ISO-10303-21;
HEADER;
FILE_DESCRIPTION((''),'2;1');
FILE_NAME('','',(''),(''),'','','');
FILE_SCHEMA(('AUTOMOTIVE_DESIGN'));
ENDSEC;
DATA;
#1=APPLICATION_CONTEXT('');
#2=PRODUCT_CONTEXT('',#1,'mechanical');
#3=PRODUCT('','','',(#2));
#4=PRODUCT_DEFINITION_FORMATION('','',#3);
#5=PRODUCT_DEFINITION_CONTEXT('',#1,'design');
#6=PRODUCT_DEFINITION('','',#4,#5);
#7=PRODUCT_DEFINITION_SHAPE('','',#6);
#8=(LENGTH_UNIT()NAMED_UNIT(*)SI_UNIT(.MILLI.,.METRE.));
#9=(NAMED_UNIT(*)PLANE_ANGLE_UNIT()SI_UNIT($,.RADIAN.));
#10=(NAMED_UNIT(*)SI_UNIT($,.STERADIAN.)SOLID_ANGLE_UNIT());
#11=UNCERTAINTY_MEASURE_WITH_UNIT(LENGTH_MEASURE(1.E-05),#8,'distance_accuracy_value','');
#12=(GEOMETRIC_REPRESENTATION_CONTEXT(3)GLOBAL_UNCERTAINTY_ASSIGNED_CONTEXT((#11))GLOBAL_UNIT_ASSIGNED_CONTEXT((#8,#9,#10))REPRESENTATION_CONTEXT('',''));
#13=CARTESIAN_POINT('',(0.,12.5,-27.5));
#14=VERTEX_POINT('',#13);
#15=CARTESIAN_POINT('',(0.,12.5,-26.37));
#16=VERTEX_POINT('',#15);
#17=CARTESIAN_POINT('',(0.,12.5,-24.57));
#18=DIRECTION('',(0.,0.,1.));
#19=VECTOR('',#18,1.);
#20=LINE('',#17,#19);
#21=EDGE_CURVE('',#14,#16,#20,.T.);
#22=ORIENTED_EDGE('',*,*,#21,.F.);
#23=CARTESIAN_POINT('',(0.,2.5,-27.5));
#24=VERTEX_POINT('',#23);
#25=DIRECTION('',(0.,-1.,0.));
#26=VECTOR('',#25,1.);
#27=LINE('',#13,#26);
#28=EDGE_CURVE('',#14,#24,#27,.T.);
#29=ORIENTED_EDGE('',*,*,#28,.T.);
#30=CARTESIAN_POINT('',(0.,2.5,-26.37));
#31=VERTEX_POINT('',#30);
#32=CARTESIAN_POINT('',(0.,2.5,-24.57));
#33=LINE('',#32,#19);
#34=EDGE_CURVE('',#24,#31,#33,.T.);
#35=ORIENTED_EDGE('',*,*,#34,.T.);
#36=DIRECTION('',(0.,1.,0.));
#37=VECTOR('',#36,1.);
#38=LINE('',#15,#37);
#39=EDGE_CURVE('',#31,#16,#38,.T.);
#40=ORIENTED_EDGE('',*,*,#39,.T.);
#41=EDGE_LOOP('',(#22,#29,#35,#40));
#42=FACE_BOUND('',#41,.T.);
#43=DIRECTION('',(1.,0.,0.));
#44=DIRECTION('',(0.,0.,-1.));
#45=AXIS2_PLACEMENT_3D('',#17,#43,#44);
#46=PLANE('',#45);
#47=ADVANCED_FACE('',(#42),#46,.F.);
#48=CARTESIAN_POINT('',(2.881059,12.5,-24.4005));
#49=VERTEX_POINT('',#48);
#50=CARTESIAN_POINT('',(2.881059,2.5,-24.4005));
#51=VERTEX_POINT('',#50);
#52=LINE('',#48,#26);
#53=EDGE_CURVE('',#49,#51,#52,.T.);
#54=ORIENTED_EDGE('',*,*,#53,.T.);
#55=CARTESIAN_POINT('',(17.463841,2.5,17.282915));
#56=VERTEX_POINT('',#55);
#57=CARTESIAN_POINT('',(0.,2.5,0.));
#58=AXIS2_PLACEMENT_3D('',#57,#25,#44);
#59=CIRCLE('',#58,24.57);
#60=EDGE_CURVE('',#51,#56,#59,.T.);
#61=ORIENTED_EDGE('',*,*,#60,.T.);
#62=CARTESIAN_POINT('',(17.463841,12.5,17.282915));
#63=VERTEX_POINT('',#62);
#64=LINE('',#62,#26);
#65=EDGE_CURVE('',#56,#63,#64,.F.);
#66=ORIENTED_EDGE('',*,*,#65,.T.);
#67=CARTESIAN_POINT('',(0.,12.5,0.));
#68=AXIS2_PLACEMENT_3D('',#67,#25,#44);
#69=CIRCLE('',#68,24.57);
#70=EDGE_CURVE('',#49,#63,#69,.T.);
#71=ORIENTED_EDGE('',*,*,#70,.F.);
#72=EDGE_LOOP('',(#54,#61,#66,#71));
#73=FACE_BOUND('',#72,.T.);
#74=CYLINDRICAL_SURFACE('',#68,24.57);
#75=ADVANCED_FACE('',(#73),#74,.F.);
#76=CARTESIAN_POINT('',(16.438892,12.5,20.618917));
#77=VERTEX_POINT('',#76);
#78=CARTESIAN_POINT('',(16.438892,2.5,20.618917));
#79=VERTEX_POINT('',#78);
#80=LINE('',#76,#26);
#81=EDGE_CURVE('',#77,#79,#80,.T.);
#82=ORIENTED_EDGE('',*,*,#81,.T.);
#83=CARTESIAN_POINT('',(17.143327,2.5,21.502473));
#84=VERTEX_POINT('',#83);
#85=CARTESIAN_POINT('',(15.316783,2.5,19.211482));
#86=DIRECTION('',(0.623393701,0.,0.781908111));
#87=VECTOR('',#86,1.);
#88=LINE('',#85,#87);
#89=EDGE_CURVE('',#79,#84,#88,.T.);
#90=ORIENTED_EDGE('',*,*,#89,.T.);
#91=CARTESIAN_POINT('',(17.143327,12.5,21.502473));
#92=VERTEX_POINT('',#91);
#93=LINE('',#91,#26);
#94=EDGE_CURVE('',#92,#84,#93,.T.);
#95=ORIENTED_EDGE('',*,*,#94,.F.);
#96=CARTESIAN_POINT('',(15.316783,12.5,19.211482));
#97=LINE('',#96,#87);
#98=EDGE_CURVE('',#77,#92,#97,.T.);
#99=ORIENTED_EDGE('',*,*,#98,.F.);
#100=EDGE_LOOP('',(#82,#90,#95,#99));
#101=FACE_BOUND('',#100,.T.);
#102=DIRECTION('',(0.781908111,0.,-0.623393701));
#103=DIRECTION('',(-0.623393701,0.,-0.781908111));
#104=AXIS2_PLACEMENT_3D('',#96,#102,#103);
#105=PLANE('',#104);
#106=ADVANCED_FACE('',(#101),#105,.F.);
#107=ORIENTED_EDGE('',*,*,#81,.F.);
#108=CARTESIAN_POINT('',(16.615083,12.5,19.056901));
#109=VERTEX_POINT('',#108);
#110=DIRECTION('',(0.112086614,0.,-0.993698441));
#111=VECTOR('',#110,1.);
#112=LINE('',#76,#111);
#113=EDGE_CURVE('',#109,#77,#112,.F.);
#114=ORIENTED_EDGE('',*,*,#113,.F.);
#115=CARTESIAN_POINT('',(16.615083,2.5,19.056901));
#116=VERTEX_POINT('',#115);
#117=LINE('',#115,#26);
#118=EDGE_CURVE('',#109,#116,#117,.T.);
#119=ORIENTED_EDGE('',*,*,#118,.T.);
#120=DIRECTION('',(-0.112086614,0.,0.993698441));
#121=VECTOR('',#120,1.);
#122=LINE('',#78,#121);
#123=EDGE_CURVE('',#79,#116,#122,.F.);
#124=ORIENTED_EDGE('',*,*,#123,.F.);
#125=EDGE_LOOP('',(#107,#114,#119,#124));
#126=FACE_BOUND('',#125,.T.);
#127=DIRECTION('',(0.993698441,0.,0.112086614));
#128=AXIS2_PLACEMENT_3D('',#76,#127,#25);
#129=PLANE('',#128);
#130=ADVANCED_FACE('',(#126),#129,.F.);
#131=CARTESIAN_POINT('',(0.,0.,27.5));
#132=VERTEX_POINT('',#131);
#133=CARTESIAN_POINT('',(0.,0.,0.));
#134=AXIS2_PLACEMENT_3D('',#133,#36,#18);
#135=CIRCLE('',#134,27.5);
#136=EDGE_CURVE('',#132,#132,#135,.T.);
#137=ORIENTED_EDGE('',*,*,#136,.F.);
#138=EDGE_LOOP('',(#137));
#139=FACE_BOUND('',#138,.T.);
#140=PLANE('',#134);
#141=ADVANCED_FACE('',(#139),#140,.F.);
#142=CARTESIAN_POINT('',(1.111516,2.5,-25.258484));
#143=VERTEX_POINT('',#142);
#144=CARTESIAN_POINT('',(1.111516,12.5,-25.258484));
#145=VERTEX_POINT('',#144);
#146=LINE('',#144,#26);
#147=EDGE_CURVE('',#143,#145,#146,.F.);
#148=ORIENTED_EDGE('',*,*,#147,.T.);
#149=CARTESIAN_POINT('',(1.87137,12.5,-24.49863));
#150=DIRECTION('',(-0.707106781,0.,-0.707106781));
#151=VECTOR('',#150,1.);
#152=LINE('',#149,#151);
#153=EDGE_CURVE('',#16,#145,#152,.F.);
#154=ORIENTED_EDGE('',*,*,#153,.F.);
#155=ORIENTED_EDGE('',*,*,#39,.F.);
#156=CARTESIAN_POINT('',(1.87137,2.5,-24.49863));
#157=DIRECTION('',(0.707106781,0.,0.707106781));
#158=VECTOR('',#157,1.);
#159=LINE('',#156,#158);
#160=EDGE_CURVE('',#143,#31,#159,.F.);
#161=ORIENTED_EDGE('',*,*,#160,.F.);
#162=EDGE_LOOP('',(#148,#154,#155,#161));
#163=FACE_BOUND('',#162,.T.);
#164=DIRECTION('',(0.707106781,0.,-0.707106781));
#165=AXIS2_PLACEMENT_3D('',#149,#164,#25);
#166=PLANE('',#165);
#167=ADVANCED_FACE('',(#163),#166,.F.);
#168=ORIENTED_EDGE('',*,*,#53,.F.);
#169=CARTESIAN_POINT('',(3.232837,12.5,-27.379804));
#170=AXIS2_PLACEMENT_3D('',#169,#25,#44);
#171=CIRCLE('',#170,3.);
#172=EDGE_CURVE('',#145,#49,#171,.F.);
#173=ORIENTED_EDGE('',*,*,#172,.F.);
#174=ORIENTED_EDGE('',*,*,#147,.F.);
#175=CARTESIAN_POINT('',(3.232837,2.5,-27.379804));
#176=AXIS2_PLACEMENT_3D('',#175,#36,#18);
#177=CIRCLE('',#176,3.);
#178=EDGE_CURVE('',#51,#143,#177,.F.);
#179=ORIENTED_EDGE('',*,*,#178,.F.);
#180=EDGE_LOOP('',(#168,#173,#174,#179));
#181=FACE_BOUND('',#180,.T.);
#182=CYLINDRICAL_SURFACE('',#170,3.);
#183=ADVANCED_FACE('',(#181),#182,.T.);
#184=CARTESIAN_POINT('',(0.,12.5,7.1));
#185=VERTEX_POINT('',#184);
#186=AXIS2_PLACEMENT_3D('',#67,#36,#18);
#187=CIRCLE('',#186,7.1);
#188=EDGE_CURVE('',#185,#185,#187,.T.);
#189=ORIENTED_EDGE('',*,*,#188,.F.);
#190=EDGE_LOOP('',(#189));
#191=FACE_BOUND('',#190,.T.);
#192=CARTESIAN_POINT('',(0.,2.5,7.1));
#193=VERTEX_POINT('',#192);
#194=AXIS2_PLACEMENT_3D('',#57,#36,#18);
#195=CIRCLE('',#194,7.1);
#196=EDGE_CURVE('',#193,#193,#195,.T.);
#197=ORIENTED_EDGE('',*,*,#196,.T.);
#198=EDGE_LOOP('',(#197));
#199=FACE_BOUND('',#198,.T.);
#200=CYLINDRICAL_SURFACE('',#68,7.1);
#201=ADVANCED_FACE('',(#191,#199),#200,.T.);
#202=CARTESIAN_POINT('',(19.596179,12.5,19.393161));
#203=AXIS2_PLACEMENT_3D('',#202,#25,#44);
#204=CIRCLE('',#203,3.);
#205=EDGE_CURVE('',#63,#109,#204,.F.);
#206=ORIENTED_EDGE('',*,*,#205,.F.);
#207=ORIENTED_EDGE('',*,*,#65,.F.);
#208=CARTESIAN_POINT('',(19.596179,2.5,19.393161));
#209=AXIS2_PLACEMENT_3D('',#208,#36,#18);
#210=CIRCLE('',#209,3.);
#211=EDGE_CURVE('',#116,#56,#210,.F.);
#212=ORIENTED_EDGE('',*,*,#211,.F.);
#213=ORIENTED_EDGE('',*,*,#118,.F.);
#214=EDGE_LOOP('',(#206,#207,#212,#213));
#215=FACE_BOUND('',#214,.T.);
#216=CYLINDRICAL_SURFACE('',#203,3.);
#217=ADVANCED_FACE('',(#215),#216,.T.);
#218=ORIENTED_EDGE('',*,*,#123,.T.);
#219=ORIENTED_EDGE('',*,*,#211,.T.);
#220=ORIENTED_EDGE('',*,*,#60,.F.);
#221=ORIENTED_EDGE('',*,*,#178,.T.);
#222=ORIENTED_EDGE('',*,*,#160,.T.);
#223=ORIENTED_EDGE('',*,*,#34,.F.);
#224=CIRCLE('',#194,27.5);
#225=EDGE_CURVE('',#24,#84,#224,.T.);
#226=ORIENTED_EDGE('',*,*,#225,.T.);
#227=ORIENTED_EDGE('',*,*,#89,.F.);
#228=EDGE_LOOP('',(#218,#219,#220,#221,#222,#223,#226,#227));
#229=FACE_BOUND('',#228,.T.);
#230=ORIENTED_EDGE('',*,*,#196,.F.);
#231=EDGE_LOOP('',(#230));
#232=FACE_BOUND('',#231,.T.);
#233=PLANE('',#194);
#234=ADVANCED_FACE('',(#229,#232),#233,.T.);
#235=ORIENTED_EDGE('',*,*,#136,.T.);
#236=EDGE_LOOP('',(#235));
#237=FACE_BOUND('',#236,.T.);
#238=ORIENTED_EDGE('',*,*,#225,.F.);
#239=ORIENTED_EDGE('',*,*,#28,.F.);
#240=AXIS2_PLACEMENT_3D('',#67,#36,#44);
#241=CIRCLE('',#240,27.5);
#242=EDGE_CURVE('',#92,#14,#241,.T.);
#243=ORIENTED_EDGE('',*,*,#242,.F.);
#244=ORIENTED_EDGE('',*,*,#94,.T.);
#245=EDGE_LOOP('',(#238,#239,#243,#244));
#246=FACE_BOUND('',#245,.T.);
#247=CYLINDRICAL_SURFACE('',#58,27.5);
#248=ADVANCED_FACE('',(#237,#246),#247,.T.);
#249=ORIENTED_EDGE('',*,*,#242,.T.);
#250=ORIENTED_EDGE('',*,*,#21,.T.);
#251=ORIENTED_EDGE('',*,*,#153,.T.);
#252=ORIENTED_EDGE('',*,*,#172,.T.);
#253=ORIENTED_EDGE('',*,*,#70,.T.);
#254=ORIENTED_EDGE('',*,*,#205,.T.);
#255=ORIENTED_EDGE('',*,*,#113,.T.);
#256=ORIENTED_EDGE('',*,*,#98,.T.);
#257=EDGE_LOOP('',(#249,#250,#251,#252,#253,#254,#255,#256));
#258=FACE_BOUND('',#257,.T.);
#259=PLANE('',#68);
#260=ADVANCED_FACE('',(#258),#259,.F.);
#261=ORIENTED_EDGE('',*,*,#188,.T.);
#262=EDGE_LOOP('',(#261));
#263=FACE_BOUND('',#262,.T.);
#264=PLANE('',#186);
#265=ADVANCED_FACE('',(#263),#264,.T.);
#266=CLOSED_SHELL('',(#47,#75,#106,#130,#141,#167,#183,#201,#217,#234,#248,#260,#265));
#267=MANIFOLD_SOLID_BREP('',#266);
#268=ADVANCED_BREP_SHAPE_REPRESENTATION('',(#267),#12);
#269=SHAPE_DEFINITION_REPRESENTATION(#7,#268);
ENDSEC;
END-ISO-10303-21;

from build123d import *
from build123d.topology import SkipClean

# Parameters (mm, degrees)
SKETCH1_R           = 27.5
BOSS_EXTRUDE1_DEPTH = 2.5
SKETCH2_R           = 7.1
BOSS_EXTRUDE2_DEPTH = 10
BOSS_EXTRUDE3_DEPTH = 10
CHAMFER1_SIZE       = 1.8
FILLET2_R           = 3


with BuildPart() as part:
    # Sketch1 → Boss-Extrude1 (new body)
    with BuildSketch(Plane(origin=(0, 0, 0), x_dir=(1, 0, 0), z_dir=(0, 1, 0))):
        with Locations(Location((0, 0, 0), (0, 0, 270))):
            Circle(SKETCH1_R)
    extrude(amount=BOSS_EXTRUDE1_DEPTH)

    # Sketch2 → Boss-Extrude2 (add)
    with BuildSketch(Plane(origin=(0, 2.5, 0), x_dir=(1, 0, 0), z_dir=(0, 1, 0))):
        with Locations(Location((0, 0, 0), (0, 0, 270))):
            Circle(SKETCH2_R)
    extrude(amount=BOSS_EXTRUDE2_DEPTH)

    # Sketch5 → Boss-Extrude3 (add)
    with SkipClean():  # the faces are left unmerged after this step: merging them gives an invalid solid
        with BuildSketch(Plane(origin=(0, 2.5, 0), x_dir=(1, 0, 0), z_dir=(0, 1, 0))):
            with BuildLine():
                Line((0, 24.57), (0, 27.5))
                ThreePointArc((0, 27.5), (25.957349719, 9.081078988), (17.143326771, -21.502473049))
                Line((17.143326771, -21.502473049), (15.316783228, -19.211482284))
                ThreePointArc((15.316783228, -19.211482284), (23.191712094, 8.113531299), (0, 24.57))
            make_face()
        extrude(amount=BOSS_EXTRUDE3_DEPTH)

    # Chamfer1
    # the kernel refuses this chamfer: 1.8 mm, written as the material it takes off along each edge
    with BuildSketch(Plane(origin=(0, 2.5, -24.57), x_dir=(0, 0, -1), z_dir=(0, 1, 0))) as chamfer1_piece_1:
        with BuildLine():
            Line((CHAMFER1_SIZE, 0), (-0.071369946, -1.871369946))
            ThreePointArc((-0.071369946, -1.871369946), (-0.018871327, -0.96279846), (0, 0))
            Line((0, 0), (CHAMFER1_SIZE, 0))
        make_face()
    extrude(amount=14.815417609, mode=Mode.SUBTRACT)
    with BuildSketch(Plane(origin=(15.316783228, 2.5, 19.211482284), x_dir=(0.7575824934147944, 0, -0.652739431681144), z_dir=(0, 1, 0))) as chamfer1_piece_2:
        with BuildLine():
            Line((1.872730398, 0), (-CHAMFER1_SIZE * 0.0381101017104, -CHAMFER1_SIZE * 0.999273546206))
            Line((-CHAMFER1_SIZE * 0.0381101017104, -CHAMFER1_SIZE * 0.999273546206), (0, 0))
            ThreePointArc((0, 0), (0.962818219, -0.01783473), (1.872730398, 0))
        make_face()
    extrude(amount=14.815417609, mode=Mode.SUBTRACT)

    # Fillet2
    fillet2_edges = [part.edges().sort_by_distance(p)[0] for p in [
        (1.871369946, 7.5, -24.498630054),
        (16.735530992, 7.5, 17.989077308),
    ]]
    fillet(fillet2_edges, radius=FILLET2_R)


solid = part.part
